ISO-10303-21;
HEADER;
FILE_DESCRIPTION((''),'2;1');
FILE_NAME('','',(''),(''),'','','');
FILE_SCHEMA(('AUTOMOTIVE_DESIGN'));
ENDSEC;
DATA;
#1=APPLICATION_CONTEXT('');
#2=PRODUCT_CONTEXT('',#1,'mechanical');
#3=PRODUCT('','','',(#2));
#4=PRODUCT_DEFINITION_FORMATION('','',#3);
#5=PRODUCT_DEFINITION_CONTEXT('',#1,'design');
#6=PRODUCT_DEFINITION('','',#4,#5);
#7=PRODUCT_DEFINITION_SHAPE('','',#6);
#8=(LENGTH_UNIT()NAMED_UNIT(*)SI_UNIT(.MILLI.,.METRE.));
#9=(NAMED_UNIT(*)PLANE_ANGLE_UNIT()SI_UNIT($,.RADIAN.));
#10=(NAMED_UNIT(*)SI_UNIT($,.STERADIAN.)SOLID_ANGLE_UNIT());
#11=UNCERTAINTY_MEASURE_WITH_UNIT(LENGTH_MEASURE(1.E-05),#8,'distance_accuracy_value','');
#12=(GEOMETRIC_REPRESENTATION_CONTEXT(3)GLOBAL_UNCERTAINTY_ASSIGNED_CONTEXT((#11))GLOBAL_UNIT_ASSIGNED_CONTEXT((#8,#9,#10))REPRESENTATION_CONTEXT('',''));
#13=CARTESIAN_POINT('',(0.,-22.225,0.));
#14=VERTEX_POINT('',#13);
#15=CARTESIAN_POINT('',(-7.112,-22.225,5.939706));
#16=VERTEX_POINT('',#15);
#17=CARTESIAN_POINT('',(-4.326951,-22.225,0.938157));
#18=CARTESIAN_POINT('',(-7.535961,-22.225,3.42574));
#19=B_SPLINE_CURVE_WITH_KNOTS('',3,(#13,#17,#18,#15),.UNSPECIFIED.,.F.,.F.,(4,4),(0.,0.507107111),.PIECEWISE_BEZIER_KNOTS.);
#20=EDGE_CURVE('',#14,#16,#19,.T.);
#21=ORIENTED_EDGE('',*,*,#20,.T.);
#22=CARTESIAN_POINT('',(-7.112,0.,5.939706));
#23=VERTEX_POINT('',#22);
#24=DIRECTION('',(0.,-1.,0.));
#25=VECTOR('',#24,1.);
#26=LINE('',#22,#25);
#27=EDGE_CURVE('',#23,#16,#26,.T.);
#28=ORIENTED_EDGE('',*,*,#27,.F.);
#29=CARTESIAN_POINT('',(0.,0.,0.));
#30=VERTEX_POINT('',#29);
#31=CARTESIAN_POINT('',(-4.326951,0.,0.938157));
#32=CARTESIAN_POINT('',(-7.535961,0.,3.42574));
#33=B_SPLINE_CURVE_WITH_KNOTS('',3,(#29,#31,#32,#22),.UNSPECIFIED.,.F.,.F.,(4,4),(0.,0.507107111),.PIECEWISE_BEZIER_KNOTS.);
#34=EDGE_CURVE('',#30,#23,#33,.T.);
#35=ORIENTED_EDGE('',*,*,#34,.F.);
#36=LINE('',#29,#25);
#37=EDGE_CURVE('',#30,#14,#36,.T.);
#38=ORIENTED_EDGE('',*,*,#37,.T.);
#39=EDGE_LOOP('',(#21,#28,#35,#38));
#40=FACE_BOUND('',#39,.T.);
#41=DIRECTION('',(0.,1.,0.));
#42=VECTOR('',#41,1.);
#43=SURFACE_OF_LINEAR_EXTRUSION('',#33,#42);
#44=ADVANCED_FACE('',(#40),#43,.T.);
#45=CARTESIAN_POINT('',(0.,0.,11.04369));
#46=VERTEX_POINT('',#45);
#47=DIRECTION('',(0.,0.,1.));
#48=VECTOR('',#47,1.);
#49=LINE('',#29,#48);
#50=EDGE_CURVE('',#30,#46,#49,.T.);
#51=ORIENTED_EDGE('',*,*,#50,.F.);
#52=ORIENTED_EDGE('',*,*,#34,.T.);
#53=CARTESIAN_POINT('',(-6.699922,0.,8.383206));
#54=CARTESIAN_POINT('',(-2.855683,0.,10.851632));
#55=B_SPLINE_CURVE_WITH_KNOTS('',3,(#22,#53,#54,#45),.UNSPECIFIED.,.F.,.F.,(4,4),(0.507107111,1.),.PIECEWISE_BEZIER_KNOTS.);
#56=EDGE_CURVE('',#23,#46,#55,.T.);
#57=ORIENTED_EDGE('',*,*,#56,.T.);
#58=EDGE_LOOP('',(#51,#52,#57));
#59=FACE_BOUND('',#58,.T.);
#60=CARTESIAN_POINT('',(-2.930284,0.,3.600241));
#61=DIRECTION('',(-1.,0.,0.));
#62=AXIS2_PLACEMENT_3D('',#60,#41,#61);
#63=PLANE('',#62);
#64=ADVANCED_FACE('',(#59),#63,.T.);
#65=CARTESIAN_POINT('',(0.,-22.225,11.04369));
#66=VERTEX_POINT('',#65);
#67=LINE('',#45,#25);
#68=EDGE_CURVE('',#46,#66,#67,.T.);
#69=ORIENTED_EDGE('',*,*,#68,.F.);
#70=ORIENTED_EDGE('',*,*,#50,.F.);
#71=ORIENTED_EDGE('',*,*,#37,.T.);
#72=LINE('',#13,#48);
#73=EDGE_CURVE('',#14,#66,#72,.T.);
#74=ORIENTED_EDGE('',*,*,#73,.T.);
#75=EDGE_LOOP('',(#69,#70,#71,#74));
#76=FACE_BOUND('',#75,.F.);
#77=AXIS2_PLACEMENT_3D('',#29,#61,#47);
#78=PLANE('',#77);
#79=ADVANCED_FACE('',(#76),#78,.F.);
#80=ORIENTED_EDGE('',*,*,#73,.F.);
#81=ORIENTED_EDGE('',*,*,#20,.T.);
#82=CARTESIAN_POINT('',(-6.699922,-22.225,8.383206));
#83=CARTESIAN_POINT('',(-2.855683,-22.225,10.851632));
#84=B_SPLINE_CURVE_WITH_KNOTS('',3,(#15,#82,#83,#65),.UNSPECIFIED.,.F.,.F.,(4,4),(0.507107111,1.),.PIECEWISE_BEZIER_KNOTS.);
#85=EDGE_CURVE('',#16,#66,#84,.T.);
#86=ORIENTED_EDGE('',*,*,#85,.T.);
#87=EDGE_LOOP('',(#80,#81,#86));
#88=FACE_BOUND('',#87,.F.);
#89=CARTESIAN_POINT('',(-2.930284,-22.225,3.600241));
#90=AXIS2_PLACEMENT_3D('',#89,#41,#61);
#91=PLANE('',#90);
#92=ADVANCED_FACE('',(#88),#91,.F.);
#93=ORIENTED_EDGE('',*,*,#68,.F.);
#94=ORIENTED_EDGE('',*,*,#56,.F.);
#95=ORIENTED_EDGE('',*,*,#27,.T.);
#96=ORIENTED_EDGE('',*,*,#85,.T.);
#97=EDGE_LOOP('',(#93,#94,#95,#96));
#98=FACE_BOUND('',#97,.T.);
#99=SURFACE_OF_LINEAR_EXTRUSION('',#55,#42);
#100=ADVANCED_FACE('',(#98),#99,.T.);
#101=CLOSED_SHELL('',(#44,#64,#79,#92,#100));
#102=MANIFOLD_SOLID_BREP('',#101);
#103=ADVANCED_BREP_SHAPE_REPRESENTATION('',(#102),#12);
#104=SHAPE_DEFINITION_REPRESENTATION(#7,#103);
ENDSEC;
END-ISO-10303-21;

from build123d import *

# Parameters (mm, degrees)
F1_DEPTH = 22.225


# Not quite as in the source:
# - the program builds the solid bodies; features that only make, move or delete a surface that nothing else refers to are left out


with BuildPart() as f1:
    # F0 (on Front) → F1 (new body)
    with BuildSketch(Plane.XZ):
        with BuildLine():
            add(Edge.make_bspline(
                [(0, 0), (-4.3269509836, 0.9381572552), (-7.5359614295, 3.4257399199), (-7.112, 5.9397063551)],
                knots=[0, 0, 0, 0, 0.5071071106, 0.5071071106, 0.5071071106, 0.5071071106], degree=3))
            Line((0, 0), (0, 5.9397063551))
            Line((0, 5.9397063551), (-7.112, 5.9397063551))
        make_face()
        with BuildLine():
            Line((-7.112, 5.9397063551), (0, 5.9397063551))
            Line((0, 5.9397063551), (0, 11.0436904221))
            add(Edge.make_bspline(
                [(-7.112, 5.9397063551), (-6.6999222167, 8.3832062675), (-2.8556827273, 10.8516316045), (0, 11.0436904221)],
                knots=[0.5071071106, 0.5071071106, 0.5071071106, 0.5071071106, 1, 1, 1, 1], degree=3))
        make_face()
    extrude(amount=F1_DEPTH)


solid = f1.part
